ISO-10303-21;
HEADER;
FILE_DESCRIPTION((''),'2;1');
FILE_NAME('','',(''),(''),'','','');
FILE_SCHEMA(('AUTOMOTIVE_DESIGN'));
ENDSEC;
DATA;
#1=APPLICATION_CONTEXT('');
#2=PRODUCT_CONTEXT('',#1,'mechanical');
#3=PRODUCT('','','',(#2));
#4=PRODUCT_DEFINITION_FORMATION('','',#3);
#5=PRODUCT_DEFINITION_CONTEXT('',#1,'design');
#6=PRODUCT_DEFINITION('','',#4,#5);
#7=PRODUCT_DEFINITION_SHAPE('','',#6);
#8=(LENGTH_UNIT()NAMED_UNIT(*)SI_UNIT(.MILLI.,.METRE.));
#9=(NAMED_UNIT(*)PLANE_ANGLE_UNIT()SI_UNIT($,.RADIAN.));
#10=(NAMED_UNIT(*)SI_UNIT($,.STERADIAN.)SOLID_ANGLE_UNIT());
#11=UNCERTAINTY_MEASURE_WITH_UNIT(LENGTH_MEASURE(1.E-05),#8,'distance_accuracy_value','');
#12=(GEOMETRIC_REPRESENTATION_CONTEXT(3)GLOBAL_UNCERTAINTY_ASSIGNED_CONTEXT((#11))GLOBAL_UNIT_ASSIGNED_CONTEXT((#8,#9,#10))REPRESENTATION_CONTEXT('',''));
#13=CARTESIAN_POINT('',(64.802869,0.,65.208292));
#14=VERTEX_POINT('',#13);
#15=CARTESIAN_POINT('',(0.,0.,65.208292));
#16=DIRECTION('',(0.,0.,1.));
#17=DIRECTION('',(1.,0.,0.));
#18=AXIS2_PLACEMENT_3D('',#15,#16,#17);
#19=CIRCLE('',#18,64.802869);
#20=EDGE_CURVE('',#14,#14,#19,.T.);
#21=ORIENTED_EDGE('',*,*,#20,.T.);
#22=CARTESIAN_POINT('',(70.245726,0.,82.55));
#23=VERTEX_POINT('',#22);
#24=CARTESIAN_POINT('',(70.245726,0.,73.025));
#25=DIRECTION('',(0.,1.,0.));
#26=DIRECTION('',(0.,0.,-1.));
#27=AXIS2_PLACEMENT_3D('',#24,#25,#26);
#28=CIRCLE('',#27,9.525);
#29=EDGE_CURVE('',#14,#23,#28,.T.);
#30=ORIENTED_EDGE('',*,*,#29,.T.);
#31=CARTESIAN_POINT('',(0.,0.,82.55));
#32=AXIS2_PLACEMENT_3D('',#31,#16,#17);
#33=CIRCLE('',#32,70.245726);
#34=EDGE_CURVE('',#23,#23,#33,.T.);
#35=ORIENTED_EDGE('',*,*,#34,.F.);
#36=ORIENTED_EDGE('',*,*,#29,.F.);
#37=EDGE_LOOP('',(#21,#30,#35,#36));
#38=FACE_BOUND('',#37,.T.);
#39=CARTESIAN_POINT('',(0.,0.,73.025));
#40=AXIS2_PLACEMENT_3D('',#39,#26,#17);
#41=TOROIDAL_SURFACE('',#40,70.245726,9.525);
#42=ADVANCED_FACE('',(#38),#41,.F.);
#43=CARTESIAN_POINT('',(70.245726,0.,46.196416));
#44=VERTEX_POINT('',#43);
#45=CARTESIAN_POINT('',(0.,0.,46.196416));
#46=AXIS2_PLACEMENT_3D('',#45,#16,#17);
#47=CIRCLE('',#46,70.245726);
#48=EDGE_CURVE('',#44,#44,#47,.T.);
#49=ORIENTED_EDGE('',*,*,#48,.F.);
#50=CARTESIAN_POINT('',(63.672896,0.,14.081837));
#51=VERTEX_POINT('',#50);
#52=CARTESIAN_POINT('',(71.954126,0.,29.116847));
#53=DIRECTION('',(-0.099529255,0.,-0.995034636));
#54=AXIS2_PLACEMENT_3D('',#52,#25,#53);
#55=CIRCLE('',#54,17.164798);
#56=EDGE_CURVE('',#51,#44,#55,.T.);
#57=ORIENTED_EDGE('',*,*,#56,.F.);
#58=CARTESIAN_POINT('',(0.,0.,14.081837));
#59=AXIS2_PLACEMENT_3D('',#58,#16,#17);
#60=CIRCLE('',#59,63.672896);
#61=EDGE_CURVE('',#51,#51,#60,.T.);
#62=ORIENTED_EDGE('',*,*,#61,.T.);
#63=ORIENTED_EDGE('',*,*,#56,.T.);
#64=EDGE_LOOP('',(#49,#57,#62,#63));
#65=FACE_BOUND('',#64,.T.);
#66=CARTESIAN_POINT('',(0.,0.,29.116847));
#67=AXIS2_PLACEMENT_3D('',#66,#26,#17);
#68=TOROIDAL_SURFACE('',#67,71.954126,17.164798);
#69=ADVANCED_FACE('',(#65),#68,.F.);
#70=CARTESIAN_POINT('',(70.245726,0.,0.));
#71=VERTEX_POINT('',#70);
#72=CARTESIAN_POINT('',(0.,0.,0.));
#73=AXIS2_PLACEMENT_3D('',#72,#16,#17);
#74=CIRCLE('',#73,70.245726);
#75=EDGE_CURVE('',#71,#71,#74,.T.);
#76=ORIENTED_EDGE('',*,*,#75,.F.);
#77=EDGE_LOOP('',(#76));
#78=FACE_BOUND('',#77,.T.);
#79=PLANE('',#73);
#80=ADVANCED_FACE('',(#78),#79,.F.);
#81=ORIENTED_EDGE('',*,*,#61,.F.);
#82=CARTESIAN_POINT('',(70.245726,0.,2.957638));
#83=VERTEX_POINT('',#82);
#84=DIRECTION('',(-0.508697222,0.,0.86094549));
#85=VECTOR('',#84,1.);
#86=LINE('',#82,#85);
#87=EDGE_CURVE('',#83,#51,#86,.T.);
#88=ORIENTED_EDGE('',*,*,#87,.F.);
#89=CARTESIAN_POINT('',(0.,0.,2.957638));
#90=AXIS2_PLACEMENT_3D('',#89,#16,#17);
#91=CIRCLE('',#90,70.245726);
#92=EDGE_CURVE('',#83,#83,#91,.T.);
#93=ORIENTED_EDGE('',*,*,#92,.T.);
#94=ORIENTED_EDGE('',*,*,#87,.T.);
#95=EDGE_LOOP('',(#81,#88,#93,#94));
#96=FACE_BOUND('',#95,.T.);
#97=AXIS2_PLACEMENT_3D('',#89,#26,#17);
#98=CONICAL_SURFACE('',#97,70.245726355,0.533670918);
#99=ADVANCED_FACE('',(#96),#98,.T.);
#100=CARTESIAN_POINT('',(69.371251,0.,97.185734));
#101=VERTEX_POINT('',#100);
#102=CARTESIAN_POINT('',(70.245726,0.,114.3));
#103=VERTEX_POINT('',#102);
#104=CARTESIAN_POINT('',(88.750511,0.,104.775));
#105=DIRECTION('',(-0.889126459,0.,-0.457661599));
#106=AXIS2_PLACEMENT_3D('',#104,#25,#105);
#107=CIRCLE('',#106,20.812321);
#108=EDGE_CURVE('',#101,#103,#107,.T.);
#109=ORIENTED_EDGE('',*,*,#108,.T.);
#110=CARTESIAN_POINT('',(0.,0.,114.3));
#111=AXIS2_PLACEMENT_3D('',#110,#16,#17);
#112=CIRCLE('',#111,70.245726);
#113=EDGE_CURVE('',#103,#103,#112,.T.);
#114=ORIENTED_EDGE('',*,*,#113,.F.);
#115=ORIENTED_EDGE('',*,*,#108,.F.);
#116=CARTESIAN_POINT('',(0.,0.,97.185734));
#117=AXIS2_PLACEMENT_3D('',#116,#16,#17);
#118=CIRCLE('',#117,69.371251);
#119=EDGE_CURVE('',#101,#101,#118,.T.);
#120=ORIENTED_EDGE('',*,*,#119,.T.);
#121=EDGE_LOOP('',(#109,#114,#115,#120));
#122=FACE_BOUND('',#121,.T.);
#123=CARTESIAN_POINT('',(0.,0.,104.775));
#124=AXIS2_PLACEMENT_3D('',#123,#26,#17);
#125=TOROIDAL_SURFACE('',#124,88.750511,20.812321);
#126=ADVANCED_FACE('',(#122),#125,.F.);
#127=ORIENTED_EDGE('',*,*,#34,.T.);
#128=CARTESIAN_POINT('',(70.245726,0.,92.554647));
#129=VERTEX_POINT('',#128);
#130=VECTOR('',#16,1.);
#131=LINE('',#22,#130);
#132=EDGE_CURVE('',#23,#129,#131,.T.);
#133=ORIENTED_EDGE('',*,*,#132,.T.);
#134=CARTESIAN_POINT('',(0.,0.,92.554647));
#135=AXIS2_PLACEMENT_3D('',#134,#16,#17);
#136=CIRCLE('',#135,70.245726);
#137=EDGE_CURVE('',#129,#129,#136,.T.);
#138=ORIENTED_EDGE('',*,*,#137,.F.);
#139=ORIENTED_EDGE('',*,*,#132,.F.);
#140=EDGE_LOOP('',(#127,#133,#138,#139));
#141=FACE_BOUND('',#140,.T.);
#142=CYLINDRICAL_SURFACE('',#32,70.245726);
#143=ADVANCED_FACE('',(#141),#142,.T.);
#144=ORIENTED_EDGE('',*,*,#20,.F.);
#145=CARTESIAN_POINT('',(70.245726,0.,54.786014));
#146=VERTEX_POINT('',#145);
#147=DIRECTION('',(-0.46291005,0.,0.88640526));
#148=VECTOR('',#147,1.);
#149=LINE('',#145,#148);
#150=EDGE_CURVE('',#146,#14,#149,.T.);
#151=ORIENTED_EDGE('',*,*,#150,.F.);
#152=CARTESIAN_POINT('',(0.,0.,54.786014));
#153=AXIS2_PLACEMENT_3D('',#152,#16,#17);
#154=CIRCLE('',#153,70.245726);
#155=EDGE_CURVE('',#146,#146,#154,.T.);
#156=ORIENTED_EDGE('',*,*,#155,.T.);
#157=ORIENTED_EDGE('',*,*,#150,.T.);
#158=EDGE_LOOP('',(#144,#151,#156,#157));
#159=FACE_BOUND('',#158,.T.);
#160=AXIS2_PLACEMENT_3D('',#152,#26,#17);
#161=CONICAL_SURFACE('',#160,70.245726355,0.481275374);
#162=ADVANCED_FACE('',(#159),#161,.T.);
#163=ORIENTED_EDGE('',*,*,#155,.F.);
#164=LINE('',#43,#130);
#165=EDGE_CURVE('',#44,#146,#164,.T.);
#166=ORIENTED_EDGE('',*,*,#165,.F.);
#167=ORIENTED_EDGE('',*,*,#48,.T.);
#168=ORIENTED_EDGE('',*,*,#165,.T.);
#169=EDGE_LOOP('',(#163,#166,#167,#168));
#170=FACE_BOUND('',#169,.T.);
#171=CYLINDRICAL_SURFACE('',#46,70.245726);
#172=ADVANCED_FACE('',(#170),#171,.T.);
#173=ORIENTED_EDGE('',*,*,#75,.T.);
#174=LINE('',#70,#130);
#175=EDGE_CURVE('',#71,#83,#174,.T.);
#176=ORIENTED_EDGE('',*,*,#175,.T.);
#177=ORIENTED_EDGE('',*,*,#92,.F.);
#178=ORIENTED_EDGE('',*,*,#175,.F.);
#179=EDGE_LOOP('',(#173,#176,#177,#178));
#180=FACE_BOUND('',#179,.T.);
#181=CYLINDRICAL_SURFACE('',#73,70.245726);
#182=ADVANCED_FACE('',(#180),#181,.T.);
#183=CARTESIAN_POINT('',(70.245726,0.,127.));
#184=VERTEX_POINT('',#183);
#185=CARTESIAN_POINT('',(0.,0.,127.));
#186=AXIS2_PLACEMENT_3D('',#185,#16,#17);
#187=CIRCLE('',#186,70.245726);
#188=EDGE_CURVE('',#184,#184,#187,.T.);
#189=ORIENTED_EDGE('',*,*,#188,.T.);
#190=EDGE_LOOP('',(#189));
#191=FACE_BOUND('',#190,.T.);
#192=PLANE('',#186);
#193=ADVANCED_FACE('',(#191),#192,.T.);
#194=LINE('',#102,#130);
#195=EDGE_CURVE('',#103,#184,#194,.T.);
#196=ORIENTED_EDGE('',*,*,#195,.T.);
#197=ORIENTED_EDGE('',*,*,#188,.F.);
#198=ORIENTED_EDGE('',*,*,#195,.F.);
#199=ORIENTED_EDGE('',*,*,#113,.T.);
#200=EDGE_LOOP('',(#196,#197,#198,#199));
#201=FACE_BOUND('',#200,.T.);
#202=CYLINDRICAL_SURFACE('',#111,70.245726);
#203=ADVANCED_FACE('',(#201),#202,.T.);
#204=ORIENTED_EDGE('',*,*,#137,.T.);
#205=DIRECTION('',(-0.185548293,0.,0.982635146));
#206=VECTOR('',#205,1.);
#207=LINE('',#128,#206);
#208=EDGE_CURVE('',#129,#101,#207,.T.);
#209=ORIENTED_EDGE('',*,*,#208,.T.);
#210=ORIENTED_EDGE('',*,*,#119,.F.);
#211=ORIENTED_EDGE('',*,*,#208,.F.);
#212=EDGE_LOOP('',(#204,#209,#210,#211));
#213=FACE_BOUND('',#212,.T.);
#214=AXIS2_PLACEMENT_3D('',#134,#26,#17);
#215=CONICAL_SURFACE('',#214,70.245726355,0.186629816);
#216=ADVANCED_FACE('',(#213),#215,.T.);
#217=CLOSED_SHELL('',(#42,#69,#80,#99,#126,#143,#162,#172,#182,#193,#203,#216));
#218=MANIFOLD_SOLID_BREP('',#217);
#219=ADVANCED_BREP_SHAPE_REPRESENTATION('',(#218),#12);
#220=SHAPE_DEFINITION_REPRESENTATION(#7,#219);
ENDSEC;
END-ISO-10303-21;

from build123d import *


# Not quite as in the source:
# - a fillet or chamfer that OpenCascade refuses, or shapes differently, is made with other operations: its cross-section is extruded or revolved along the edge and cut away or added


with BuildPart() as f1:
    # F0 (on Front) → F1 (revolve)
    with BuildSketch(Plane.XZ):
        with BuildLine():
            Line((0, 0), (70.2457263553, 0))
            Line((70.2457263553, 0), (70.2457263553, 12.037278153))
            ThreePointArc((70.2457263553, 12.037278153), (54.7893275552, 29.1168470867), (70.2457263553, 46.1964160204))
            Line((70.2457263553, 46.1964160204), (70.2457263553, 63.5))
            ThreePointArc((70.2457263553, 63.5), (60.7207263553, 73.025), (70.2457263553, 82.55))
            Line((70.2457263553, 82.55), (70.2457263553, 95.25))
            ThreePointArc((70.2457263553, 95.25), (67.9381906617, 104.775), (70.2457263553, 114.3))
            Line((70.2457263553, 114.3), (70.2457263553, 127))
            Line((70.2457263553, 127), (0, 127))
            Line((0, 127), (0, 0))
        make_face()
    revolve(axis=Axis((0, 0, 63.5), (0, 0, 1)))

    # F2: chamfer of 12.7 on 3 edges, made by hand

    # F2_s1 → F2_t2 (revolve, cut)
    with BuildSketch(Plane.XZ):
        with BuildLine():
            Line((70.2457263553, 54.7860135972), (64.8028692124, 65.2082915417))
            ThreePointArc((64.8028692124, 65.2082915417), (67.2107952899, 63.9964442778), (70.2457263553, 63.5))
            Line((70.2457263553, 63.5), (70.2457263553, 54.7860135972))
        make_face()
    revolve(axis=Axis((0, 0, 63.5), (0, 0, 1)), mode=Mode.SUBTRACT)

    # F2_s3 → F2_t4 (revolve, cut)
    with BuildSketch(Plane.XZ):
        with BuildLine():
            Line((70.2457263553, 92.5546468293), (69.3712508592, 97.1857341969))
            ThreePointArc((69.3712508592, 97.1857341969), (69.6830735003, 96.4332072381), (70.2457263553, 95.25))
            Line((70.2457263553, 95.25), (70.2457263553, 92.5546468293))
        make_face()
    revolve(axis=Axis((0, 0, 95.25), (0, 0, 1)), mode=Mode.SUBTRACT)

    # F2_s5 → F2_t6 (revolve, cut)
    with BuildSketch(Plane.XZ):
        with BuildLine():
            Line((70.2457263553, 2.9576382974), (63.6728956225, 14.0818369998))
            ThreePointArc((63.6728956225, 14.0818369998), (66.6706692782, 12.7854237046), (70.2457263553, 12.037278153))
            Line((70.2457263553, 12.037278153), (70.2457263553, 2.9576382974))
        make_face()
    revolve(axis=Axis((0, 0, 12.037278153), (0, 0, 1)), mode=Mode.SUBTRACT)


solid = f1.part
